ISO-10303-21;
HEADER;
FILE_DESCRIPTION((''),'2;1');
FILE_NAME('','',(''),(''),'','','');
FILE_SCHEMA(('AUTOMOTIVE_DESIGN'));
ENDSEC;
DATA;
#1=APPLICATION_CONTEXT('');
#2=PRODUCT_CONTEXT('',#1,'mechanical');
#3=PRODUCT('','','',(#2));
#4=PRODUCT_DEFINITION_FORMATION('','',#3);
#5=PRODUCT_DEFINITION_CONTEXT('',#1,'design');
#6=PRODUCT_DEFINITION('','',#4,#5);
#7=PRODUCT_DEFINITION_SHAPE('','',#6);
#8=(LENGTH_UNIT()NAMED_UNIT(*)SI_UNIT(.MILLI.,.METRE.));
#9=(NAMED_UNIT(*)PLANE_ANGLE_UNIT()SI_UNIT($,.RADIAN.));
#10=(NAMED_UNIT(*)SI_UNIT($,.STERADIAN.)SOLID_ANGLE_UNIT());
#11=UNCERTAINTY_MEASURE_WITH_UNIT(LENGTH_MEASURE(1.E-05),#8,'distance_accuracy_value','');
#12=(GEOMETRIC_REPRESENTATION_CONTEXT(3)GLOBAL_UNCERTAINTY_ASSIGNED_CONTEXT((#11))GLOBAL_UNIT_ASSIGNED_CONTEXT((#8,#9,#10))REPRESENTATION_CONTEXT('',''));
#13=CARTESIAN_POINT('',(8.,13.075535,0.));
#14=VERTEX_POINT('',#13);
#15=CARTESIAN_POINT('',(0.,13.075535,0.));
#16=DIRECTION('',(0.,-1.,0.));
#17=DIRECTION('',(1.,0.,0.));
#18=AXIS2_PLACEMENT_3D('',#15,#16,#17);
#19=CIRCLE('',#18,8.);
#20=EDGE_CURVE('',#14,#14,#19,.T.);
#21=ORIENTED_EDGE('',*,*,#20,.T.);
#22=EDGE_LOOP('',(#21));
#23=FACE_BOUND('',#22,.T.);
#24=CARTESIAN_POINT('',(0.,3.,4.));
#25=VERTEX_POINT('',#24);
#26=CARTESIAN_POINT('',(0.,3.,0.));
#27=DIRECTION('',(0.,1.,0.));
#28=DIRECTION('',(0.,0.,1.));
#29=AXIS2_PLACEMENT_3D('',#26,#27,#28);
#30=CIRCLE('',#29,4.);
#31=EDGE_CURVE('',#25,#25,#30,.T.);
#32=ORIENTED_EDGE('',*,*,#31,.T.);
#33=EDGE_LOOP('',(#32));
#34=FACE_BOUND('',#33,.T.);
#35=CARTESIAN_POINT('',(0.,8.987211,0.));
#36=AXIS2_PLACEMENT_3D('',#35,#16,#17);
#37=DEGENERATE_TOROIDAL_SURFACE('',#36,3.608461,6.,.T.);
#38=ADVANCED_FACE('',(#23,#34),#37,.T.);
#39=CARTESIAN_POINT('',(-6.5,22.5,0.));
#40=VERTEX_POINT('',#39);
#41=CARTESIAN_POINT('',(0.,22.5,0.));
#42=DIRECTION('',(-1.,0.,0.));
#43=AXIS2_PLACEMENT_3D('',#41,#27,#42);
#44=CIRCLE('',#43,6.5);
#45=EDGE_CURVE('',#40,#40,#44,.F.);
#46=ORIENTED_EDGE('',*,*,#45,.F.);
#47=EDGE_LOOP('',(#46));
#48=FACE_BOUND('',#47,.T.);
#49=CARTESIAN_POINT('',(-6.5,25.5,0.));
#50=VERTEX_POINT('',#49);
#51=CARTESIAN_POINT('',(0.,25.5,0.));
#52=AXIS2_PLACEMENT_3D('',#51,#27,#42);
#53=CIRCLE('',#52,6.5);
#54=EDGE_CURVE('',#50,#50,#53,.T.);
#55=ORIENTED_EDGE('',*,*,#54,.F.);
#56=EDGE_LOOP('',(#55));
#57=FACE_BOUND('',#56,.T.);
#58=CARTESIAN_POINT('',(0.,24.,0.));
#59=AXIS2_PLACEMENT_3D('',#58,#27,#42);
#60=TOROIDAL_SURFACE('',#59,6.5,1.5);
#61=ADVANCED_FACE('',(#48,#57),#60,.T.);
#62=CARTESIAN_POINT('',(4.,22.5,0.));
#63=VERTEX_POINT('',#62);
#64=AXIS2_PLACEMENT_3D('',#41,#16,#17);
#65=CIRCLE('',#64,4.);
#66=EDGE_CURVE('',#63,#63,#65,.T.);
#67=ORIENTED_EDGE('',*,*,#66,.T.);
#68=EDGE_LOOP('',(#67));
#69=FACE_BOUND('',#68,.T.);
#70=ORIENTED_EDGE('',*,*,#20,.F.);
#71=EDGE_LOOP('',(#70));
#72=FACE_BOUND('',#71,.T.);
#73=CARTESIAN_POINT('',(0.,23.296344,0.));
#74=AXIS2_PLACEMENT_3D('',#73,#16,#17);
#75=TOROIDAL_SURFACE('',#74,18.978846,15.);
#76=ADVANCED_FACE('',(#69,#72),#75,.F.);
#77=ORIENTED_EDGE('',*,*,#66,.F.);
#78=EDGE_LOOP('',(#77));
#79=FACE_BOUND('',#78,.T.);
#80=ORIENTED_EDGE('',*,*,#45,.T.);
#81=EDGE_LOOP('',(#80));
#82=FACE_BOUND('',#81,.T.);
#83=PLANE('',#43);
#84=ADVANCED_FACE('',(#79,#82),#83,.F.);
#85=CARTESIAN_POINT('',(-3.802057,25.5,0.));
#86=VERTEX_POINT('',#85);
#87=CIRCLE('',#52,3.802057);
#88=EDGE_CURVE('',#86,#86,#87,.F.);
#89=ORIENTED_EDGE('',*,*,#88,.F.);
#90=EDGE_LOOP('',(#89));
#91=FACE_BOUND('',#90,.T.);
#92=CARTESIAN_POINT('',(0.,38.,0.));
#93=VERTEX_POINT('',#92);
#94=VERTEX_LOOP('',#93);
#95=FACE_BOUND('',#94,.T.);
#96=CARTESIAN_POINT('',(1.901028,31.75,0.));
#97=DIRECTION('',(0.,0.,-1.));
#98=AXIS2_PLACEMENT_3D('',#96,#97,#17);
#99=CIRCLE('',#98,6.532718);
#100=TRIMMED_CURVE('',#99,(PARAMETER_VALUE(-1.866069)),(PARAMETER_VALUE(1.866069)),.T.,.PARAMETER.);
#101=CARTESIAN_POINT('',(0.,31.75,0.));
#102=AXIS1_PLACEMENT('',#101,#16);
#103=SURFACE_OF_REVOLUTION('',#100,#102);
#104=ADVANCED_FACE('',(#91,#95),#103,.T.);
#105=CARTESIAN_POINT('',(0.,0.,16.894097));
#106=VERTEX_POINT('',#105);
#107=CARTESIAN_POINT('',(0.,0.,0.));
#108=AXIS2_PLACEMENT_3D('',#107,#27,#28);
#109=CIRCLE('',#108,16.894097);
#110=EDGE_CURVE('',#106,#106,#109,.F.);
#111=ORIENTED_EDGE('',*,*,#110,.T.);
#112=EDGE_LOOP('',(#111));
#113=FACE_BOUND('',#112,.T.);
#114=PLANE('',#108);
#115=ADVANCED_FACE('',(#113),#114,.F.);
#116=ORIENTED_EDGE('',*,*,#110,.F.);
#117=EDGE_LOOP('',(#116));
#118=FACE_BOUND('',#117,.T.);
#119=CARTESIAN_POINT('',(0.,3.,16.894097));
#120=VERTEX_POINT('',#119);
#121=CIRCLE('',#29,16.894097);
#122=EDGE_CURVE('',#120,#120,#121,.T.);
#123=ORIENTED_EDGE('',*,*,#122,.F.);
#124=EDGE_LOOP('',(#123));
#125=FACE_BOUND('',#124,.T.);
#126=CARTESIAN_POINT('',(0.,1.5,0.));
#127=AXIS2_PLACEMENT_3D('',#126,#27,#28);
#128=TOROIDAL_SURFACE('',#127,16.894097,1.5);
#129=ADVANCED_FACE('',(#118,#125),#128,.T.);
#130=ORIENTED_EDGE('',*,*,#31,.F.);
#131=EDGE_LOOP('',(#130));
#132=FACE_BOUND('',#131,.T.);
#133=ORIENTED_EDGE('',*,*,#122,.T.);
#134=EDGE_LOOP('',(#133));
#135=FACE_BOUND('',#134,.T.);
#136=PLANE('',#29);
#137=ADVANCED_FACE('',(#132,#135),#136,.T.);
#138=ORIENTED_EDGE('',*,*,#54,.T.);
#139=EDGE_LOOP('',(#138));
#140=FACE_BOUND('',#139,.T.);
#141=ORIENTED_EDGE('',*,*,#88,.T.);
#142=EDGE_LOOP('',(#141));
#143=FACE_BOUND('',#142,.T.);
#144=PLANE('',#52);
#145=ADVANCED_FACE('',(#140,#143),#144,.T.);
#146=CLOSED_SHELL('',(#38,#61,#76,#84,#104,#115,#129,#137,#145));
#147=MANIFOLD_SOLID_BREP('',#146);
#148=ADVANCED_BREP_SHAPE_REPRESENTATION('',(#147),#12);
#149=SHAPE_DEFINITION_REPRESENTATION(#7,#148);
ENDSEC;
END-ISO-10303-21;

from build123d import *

# Parameters (mm, degrees)
SKETCH3_R           = 18.394097112
BOSS_EXTRUDE3_DEPTH = 3
FILLET12_R          = 1.5
SKETCH4_W           = 4
SKETCH4_H           = 19.5
SKETCH5_R           = 8
BOSS_EXTRUDE4_DEPTH = 3
FILLET13_R          = 1.5


with BuildPart() as part:
    # Sketch3 → Boss-Extrude3 (new body)
    with BuildSketch(Plane(origin=(0, 0, 0), x_dir=(1, 0, 0), z_dir=(0, 1, 0))):
        with Locations(Location((0, 0, 0), (0, 0, 270))):
            Circle(SKETCH3_R)
    extrude(amount=BOSS_EXTRUDE3_DEPTH)

    # Fillet12
    fillet12_edges = [part.edges().sort_by_distance(p)[0] for p in [
        (0, 0, -18.394097112),
        (0, 3, -18.394097112),
    ]]
    fillet(fillet12_edges, radius=FILLET12_R - 0.0001)  # a hair under: the kernel refuses the full size

    # Sketch4 → Revolve2 (revolve)
    with BuildSketch(Plane.XY, mode=Mode.PRIVATE) as revolve2_sk:
        with BuildLine():
            ThreePointArc((-8, 13.07553471), (-5.171037359, 17.435933011), (-4, 22.5))
            Line((-4, 22.5), (-4, 3))
            ThreePointArc((-4, 3), (-9.185069443, 6.773290765), (-8, 13.07553471))
        make_face()
        with Locations((-2, 12.75)):
            Rectangle(SKETCH4_W, SKETCH4_H)
    revolve(revolve2_sk.sketch.rotate(Axis((0, -279.913753281, 0), (0, 1, 0)), 180), axis=Axis((0, -279.913753281, 0), (0, 1, 0)))

    # Sketch5 → Boss-Extrude4 (add)
    with BuildSketch(Plane(origin=(0, 22.5, 0), x_dir=(1, 0, 0), z_dir=(0, 1, 0))):
        with Locations(Location((0, 0, 0), (0, 0, 180))):
            Circle(SKETCH5_R)
    extrude(amount=BOSS_EXTRUDE4_DEPTH)

    # Fillet13
    fillet13_edges = [part.edges().sort_by_distance(p)[0] for p in [
        (8, 22.5, 0),
        (8, 25.5, 0),
    ]]
    fillet(fillet13_edges, radius=FILLET13_R - 0.0001)  # a hair under: the kernel refuses the full size

    # Sketch6 → Revolve3 (revolve)
    with BuildSketch(Plane.XY):
        with BuildLine():
            Line((0, 25.5), (1e-09, 38))
            ThreePointArc((1e-09, 38), (-8.433746623, 31.75), (0, 25.5))
        make_face()
    revolve(axis=Axis((0, -279.913753281, 0), (0, 1, 0)))


solid = part.part
